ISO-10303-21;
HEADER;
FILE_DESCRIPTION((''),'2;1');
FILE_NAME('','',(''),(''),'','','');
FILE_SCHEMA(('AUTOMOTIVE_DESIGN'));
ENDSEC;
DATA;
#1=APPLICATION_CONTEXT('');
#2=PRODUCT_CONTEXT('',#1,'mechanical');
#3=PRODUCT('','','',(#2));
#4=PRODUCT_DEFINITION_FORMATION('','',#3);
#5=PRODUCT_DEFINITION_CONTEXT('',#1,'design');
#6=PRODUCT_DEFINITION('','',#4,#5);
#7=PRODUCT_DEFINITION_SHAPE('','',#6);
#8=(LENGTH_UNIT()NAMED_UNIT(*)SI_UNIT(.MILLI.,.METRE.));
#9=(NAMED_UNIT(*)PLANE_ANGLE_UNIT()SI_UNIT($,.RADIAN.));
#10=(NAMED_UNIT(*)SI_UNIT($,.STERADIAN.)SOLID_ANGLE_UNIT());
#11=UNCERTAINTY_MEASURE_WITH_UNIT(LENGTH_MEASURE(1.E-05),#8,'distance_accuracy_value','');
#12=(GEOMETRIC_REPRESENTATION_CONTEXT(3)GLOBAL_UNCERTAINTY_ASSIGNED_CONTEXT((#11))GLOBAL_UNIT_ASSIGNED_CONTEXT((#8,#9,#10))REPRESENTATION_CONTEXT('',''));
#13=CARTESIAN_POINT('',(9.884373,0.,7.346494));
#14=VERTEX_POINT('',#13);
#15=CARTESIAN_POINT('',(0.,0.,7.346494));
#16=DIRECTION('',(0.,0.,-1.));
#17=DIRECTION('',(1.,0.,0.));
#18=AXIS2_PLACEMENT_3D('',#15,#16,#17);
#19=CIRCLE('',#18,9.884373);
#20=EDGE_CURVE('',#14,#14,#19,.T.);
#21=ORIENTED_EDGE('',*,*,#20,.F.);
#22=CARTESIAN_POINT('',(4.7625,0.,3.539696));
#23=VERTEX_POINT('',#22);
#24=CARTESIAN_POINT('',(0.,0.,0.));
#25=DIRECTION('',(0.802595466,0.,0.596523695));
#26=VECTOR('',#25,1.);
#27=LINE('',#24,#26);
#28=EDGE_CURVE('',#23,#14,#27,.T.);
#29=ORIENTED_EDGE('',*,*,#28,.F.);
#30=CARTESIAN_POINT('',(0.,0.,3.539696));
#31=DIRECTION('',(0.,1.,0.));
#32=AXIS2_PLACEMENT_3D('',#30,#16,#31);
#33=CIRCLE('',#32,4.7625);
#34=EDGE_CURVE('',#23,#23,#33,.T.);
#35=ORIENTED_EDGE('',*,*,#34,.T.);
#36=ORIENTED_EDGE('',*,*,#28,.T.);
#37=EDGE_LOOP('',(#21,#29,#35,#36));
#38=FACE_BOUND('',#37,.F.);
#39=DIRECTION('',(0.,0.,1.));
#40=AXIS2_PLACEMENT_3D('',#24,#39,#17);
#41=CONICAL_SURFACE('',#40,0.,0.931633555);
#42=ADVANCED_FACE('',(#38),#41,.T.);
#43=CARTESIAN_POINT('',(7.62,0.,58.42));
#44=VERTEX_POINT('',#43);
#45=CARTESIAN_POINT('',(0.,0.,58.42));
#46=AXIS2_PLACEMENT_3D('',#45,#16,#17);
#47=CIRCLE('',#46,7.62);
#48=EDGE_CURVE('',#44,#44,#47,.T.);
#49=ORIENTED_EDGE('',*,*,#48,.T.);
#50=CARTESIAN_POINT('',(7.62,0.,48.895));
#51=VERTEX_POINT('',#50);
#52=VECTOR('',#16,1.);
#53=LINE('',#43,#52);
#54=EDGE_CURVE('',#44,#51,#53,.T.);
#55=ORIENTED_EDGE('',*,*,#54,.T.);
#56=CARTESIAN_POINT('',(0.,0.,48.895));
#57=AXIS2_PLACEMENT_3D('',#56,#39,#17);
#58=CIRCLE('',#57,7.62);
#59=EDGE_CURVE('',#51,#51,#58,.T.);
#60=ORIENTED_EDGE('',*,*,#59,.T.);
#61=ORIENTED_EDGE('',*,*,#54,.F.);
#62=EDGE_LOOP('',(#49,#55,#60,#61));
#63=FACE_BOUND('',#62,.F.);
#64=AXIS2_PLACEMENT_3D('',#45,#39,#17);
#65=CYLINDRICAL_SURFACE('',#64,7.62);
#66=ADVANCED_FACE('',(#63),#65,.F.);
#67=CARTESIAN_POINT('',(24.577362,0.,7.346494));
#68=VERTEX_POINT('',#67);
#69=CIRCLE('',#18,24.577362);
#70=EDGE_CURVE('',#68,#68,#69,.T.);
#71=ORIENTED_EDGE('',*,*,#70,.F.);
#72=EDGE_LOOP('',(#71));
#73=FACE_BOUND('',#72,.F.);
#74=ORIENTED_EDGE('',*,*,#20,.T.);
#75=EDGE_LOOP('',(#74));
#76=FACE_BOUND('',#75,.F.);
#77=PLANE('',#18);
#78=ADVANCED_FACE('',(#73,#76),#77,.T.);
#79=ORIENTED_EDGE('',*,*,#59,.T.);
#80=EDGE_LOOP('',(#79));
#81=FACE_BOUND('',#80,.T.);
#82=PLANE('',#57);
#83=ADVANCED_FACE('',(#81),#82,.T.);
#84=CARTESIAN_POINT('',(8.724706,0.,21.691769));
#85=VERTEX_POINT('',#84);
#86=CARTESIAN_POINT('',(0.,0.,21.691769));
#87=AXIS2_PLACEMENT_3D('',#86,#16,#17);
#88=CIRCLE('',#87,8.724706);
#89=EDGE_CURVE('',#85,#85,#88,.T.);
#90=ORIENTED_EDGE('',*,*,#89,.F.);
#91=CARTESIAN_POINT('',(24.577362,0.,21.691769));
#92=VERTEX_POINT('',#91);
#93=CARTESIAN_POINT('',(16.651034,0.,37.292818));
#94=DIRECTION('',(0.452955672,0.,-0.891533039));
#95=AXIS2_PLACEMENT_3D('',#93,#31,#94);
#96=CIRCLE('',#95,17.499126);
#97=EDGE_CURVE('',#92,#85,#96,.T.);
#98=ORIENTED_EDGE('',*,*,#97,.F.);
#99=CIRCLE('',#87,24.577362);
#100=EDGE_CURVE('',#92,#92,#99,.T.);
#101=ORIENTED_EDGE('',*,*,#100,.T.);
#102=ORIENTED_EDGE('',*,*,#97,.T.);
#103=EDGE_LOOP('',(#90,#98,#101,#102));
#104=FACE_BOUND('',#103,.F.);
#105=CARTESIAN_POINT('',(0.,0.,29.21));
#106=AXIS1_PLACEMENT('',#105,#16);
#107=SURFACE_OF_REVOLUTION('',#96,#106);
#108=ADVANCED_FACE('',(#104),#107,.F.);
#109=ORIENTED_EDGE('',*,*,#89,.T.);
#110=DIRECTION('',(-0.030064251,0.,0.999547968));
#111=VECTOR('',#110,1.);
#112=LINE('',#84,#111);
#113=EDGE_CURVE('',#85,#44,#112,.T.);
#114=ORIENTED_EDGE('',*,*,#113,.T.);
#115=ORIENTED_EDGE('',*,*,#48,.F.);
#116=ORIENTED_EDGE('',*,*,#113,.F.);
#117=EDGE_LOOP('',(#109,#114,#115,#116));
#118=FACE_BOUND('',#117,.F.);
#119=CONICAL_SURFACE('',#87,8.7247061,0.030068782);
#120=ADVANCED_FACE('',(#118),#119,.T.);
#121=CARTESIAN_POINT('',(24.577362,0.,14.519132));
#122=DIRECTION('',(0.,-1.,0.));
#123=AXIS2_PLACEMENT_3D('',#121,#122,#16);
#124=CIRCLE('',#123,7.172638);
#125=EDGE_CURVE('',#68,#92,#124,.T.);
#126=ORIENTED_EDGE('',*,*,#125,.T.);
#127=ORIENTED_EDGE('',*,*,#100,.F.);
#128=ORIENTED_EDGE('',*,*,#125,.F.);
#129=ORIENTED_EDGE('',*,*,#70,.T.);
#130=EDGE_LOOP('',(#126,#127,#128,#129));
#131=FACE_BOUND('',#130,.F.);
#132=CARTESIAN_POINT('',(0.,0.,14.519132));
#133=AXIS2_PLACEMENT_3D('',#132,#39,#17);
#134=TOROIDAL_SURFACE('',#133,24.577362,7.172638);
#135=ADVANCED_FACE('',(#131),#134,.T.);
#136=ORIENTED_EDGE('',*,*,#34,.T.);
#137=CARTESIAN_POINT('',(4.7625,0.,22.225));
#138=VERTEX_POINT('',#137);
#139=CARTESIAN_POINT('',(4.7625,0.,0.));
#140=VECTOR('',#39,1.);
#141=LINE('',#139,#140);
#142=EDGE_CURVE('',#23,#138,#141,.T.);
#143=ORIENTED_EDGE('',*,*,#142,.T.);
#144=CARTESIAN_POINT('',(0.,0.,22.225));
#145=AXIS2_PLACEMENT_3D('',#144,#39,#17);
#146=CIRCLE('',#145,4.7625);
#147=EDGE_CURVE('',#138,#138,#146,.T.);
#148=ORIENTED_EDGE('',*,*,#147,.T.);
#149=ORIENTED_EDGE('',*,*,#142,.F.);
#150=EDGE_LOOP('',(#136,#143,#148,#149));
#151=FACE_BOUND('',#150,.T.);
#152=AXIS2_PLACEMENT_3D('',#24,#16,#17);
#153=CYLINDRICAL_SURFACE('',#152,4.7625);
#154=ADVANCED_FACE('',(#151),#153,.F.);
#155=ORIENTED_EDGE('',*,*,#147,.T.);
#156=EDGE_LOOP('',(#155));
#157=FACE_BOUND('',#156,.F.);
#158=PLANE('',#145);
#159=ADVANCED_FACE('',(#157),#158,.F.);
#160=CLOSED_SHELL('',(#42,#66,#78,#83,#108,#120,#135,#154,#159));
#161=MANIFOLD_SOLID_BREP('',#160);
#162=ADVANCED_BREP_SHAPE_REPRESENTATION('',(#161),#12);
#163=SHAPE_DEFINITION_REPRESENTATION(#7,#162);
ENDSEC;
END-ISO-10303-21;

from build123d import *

# Parameters (mm, degrees)
F2_R      = 4.7625
F1_FACE_R = 7.62
F3_DEPTH  = 9.525
F4_DEPTH  = 22.225


# Not quite as in the source:
# - a feature names something its author has since deleted; it is built from what else it names


with BuildPart() as f1:
    # F0 (on Front) → F1 (revolve)
    with BuildSketch(Plane.XZ):
        with BuildLine():
            Line((0, 58.42), (0, 0))
            Line((0, 0), (9.8843732849, 7.3464941233))
            Line((9.8843732849, 7.3464941233), (24.5773624629, 7.3464941233))
            ThreePointArc((24.5773624629, 7.3464941233), (31.75, 14.5191316605), (24.5773624629, 21.6917691976))
            ThreePointArc((24.5773624629, 21.6917691976), (16.6510342816, 19.7936922223), (8.7247061003, 21.6917691976))
            Line((8.7247061003, 21.6917691976), (7.62, 58.42))
            Line((7.62, 58.42), (0, 58.42))
        make_face()
    revolve(axis=Axis((0, 0, 29.21), (0, 0, -1)))

    # F2 (on Top) + F1_face (on face) → F3 (cut)
    with BuildSketch(Plane.XY):
        Circle(F2_R)
    with BuildSketch(Plane.XY.offset(58.42)):
        Circle(F1_FACE_R)
    extrude(amount=-F3_DEPTH, mode=Mode.SUBTRACT)

    # F2 (on Top) → F4 (cut)
    with BuildSketch(Plane.XY):
        Circle(F2_R)
    extrude(amount=F4_DEPTH, mode=Mode.SUBTRACT)


solid = f1.part
